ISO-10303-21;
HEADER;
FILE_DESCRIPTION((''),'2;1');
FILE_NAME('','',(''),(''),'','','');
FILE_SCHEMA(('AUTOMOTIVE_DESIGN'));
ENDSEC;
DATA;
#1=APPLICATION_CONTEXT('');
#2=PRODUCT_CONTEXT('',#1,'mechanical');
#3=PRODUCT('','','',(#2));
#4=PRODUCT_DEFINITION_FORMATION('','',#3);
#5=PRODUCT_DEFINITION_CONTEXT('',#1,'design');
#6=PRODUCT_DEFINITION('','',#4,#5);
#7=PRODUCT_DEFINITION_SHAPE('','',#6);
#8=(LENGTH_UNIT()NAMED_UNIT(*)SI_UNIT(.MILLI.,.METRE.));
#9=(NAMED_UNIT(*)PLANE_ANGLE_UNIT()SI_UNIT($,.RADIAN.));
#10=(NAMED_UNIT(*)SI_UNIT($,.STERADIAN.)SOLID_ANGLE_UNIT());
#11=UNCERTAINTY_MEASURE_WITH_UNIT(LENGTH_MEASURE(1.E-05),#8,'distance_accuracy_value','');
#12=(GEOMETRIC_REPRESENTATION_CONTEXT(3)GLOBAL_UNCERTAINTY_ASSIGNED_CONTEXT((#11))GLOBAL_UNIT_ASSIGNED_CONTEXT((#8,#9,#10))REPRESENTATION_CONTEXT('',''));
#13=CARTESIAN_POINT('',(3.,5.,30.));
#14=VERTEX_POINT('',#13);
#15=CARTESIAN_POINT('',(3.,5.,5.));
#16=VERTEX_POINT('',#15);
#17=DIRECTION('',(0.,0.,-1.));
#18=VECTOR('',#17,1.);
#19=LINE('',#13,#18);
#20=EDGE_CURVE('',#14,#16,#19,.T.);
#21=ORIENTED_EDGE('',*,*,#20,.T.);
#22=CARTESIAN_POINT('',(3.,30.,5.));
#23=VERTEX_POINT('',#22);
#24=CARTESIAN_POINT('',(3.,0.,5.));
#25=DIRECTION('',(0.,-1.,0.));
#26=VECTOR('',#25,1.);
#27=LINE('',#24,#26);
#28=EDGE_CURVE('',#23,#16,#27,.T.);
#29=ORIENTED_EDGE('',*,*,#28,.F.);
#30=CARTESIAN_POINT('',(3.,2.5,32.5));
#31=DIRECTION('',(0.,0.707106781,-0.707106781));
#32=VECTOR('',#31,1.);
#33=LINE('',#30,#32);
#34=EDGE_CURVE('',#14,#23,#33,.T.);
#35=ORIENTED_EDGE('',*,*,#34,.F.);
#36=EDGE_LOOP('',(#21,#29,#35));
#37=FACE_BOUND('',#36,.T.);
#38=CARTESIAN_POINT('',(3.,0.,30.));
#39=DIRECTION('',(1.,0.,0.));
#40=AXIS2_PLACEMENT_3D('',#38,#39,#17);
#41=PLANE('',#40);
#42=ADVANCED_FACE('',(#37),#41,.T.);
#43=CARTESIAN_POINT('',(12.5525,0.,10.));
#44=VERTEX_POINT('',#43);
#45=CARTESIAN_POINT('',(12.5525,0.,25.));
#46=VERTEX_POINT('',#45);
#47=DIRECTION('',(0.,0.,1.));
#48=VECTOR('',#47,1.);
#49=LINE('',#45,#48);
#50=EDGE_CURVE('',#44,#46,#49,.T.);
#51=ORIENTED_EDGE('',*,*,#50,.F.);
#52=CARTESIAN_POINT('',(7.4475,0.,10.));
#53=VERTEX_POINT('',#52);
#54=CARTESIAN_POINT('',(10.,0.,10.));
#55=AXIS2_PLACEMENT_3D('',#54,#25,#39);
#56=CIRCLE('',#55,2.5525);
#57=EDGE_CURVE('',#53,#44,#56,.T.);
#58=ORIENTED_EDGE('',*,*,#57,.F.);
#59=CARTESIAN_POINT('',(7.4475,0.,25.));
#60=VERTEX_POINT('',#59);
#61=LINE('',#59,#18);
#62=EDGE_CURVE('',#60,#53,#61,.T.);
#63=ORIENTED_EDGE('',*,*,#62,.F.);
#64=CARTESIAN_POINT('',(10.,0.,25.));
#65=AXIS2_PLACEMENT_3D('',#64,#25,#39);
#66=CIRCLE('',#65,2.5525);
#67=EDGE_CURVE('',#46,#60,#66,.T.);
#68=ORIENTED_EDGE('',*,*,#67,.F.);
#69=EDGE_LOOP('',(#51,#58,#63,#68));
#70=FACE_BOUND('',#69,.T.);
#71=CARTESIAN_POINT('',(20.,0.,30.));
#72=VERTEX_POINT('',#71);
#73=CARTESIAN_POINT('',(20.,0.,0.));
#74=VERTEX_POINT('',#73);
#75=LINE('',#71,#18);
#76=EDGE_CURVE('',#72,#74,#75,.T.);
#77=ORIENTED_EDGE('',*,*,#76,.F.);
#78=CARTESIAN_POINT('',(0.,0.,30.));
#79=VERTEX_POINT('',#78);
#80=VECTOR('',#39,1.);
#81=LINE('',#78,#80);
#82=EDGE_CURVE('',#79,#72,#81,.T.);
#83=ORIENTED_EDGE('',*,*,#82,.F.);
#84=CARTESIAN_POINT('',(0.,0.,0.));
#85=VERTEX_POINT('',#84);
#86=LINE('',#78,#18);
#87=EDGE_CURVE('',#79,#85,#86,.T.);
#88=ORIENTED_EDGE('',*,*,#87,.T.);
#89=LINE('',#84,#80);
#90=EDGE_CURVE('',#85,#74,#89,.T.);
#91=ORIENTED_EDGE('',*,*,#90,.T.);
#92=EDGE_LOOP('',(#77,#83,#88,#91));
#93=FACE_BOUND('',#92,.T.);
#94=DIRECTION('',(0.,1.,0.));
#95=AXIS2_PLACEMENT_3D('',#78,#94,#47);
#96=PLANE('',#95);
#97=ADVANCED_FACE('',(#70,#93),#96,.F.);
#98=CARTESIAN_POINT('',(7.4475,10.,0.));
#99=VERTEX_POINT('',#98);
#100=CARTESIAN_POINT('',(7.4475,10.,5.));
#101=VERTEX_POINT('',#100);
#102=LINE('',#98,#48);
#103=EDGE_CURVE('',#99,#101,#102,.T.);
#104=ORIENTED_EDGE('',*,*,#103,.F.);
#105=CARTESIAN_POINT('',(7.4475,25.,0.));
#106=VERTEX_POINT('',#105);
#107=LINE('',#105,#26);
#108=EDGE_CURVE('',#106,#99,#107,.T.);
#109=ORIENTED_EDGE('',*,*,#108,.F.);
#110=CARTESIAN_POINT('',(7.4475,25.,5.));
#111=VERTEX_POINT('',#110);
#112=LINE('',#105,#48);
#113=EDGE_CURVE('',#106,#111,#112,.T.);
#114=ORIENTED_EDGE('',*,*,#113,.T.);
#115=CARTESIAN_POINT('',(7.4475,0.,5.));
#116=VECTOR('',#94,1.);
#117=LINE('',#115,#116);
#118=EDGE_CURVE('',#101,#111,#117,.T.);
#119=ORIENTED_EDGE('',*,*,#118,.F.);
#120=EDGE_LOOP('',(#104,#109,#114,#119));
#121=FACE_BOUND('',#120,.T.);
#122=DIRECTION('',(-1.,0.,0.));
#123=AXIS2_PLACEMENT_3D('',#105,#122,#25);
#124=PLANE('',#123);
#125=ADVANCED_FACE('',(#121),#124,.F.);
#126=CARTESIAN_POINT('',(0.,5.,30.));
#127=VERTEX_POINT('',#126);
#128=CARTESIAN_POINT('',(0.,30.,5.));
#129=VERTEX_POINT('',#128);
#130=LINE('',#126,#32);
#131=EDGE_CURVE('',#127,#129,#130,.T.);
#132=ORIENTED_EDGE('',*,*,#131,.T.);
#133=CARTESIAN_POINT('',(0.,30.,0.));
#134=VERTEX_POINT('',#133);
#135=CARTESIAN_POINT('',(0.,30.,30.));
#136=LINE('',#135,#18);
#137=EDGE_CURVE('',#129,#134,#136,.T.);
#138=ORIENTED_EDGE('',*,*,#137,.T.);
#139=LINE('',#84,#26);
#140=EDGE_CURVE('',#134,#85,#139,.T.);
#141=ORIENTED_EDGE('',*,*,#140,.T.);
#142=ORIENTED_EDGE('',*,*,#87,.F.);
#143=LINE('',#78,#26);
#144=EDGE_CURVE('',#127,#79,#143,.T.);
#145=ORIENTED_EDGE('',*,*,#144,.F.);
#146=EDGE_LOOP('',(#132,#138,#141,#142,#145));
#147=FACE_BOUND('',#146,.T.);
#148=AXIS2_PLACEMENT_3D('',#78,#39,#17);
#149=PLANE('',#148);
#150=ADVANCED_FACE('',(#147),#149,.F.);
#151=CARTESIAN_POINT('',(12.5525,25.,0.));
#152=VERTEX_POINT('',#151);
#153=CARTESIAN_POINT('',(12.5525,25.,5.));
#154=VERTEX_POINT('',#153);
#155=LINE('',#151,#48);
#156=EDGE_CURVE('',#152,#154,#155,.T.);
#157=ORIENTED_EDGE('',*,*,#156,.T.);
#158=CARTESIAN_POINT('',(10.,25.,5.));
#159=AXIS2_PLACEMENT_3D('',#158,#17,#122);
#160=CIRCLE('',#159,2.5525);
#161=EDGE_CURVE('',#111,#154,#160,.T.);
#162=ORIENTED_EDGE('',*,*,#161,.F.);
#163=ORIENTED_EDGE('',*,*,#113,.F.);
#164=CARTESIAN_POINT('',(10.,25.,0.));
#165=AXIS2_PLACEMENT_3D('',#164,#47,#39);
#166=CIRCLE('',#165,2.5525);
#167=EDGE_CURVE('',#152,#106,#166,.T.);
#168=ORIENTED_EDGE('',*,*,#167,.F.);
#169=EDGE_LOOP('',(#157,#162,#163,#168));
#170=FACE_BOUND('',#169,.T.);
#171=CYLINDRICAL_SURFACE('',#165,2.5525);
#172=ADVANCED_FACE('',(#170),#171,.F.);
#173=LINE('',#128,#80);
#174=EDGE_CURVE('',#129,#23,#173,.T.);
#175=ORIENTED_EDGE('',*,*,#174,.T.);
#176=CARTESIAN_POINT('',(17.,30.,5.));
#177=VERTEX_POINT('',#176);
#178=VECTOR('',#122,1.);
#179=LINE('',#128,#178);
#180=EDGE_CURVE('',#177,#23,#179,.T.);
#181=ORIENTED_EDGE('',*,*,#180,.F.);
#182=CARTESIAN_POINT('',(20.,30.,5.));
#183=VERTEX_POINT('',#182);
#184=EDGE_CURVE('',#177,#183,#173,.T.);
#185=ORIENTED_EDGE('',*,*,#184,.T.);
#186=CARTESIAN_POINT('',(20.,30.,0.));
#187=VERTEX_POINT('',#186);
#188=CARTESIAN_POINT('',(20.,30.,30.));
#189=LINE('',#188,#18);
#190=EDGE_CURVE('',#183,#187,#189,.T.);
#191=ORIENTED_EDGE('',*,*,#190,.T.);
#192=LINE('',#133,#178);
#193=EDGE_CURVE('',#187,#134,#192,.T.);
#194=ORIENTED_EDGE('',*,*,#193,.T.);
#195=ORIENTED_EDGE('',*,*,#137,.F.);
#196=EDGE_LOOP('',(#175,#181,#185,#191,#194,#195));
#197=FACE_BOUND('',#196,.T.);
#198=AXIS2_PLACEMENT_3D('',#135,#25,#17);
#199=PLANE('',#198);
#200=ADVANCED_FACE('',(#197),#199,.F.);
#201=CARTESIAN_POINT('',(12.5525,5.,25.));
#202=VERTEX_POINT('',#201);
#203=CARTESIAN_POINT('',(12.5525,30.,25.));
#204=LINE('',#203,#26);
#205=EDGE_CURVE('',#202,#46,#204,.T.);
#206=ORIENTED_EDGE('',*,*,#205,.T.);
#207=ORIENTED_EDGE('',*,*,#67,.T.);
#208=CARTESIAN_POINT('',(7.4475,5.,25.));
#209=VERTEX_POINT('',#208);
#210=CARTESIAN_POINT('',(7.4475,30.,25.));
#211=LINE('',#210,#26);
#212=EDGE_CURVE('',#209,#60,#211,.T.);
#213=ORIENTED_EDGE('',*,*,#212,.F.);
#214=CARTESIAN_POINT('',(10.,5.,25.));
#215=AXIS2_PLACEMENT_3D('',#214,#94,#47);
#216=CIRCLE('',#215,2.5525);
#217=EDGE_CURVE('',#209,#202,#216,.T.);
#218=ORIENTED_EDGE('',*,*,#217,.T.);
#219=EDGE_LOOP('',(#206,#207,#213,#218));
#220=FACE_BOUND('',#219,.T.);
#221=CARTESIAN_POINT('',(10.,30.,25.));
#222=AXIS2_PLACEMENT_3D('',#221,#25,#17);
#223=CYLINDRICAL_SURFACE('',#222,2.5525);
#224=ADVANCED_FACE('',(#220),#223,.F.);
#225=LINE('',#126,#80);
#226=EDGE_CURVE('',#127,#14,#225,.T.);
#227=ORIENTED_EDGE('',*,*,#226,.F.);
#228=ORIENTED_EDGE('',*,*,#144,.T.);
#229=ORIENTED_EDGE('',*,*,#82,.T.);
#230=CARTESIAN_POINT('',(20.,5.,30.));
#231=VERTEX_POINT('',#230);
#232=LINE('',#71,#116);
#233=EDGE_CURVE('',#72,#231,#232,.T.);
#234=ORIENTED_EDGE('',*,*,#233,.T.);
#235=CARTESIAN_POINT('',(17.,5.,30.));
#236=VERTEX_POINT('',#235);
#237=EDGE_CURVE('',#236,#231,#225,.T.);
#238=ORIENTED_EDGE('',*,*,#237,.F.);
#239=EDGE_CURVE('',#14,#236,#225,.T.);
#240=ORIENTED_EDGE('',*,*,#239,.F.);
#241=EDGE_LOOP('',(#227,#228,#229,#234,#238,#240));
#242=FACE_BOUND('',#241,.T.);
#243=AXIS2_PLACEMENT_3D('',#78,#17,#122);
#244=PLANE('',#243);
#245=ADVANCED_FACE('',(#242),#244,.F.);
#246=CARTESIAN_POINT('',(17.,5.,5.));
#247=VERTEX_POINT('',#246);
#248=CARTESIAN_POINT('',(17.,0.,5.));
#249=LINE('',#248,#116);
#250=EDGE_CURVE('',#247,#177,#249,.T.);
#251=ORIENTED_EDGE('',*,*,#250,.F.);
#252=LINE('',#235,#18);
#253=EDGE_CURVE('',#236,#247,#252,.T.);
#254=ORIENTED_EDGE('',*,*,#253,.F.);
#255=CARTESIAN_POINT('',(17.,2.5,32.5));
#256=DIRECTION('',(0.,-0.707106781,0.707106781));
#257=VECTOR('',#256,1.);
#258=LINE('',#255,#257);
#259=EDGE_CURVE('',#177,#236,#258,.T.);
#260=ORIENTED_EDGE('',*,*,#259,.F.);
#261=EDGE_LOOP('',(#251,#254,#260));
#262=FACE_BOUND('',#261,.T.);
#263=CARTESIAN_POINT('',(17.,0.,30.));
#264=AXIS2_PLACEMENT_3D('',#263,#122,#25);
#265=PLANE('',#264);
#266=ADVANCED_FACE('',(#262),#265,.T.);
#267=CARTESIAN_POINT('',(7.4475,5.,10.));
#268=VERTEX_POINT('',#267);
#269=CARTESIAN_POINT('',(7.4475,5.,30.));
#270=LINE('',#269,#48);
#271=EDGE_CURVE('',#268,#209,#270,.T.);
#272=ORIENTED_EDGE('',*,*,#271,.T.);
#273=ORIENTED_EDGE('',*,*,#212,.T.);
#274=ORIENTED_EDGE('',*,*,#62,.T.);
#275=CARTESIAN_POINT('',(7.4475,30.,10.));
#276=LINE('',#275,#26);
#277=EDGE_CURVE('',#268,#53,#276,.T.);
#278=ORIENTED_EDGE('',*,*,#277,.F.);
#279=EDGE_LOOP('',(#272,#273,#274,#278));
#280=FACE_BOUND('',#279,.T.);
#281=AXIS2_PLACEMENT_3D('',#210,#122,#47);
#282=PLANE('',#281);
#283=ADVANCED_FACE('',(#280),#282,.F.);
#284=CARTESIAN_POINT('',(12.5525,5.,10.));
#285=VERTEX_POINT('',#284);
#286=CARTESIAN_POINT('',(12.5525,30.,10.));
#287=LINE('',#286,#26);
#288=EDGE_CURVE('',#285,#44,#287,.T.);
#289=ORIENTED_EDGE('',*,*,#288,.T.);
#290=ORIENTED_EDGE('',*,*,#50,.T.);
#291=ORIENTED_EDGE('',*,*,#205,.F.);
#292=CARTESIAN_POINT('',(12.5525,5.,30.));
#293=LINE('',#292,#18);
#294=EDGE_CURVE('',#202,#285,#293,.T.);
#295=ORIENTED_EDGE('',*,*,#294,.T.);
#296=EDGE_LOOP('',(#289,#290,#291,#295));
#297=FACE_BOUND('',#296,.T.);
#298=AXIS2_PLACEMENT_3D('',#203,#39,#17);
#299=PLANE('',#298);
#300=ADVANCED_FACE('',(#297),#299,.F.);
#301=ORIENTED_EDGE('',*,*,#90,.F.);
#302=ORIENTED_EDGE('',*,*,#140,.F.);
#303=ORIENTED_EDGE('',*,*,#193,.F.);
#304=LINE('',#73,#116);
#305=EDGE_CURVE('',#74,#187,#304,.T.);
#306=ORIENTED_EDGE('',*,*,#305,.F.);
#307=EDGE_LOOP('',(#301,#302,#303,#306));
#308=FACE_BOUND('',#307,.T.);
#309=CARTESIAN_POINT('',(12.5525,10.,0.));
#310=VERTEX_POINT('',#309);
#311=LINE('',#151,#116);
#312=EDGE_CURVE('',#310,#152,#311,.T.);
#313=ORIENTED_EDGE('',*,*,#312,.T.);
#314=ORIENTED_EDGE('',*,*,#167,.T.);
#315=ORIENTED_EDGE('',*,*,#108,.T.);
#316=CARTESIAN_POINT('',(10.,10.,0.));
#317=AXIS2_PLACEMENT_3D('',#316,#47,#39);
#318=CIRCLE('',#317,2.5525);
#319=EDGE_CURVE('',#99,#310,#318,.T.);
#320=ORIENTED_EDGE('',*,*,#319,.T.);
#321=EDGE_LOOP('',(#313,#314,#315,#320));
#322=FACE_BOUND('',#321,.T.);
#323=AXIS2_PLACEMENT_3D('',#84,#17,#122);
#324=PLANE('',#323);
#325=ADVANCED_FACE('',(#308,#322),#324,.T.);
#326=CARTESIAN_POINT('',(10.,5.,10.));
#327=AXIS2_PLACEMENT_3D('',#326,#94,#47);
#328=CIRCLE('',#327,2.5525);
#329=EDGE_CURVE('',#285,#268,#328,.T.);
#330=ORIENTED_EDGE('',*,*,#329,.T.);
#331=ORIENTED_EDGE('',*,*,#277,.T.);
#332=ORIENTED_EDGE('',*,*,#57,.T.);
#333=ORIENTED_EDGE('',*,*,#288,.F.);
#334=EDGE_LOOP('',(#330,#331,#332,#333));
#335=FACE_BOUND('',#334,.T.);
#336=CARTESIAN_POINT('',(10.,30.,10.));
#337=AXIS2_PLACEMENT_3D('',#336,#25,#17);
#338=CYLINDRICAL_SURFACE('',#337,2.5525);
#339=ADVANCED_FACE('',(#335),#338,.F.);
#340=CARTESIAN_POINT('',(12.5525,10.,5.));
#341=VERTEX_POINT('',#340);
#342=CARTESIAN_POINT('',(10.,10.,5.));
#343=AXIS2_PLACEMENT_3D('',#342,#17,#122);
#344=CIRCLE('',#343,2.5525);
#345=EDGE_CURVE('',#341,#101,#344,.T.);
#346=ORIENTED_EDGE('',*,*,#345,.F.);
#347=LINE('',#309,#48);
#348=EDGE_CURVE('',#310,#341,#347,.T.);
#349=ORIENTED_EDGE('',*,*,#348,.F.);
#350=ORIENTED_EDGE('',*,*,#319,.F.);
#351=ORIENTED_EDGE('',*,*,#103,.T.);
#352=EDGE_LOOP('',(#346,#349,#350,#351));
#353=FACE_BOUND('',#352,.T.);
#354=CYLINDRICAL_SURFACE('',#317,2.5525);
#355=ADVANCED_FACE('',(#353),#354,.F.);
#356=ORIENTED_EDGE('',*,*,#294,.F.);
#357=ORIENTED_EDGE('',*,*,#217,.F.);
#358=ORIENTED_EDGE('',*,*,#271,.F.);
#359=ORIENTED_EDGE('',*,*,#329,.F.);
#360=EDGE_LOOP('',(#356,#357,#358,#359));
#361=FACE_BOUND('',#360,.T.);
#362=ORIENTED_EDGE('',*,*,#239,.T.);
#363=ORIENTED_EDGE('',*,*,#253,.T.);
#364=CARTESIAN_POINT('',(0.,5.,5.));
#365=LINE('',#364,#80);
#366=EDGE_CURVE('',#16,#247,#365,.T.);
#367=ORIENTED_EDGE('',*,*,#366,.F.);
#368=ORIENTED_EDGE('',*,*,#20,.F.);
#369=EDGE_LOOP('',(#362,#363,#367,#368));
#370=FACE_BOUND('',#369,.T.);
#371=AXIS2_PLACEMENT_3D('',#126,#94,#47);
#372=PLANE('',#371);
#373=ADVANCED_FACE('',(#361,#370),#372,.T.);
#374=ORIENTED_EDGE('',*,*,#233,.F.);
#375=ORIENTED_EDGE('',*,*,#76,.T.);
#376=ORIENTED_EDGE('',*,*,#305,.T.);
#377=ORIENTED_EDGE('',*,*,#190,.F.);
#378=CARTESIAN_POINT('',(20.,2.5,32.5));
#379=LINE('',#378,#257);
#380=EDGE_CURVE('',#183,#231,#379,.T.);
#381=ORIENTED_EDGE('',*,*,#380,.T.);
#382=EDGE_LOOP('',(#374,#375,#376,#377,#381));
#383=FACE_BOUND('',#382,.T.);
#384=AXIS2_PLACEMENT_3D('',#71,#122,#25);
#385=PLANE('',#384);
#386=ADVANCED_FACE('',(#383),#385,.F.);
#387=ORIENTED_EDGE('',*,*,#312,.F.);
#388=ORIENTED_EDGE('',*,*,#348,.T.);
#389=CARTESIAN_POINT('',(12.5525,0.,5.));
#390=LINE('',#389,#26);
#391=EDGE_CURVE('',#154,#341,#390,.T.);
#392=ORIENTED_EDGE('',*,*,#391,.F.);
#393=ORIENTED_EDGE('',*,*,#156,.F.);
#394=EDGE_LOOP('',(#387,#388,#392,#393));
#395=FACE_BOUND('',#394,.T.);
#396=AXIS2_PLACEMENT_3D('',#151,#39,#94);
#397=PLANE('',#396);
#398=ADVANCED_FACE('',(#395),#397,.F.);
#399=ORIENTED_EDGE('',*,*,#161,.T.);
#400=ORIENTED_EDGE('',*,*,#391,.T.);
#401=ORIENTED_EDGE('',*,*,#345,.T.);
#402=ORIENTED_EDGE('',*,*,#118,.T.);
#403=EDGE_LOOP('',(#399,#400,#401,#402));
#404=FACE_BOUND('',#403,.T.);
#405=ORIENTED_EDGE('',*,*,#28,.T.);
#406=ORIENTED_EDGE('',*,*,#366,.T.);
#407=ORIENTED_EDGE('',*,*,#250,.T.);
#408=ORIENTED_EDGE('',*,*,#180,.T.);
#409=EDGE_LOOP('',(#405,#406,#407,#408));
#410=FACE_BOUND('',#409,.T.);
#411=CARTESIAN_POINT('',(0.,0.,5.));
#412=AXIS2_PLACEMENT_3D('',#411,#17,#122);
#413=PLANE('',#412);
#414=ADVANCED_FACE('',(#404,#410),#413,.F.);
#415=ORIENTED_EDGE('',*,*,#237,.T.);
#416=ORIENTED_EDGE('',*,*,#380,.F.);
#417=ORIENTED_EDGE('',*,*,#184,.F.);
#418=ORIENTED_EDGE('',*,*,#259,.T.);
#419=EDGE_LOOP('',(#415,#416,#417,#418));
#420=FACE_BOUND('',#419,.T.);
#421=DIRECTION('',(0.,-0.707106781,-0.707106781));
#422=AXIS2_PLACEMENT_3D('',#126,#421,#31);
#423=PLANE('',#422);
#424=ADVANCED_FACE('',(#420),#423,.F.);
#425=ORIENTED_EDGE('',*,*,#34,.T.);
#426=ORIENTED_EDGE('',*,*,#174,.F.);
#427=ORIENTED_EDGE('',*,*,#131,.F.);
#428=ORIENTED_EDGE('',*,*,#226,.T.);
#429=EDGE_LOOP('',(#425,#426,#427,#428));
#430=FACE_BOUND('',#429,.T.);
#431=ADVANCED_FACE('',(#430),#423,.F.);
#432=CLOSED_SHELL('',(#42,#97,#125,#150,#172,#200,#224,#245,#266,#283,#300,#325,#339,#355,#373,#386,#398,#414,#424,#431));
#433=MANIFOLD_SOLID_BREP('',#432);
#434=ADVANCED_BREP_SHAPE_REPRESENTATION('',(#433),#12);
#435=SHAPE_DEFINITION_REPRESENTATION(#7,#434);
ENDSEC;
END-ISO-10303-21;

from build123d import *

# Parameters (mm, degrees)
ESQUISSE1_W                  = 20
ESQUISSE1_H                  = 30
BOSS_EXTRU_1_DEPTH           = 30
COQUE1_START                 = 3
COQUE1_OUTLINE_W             = 25
COQUE1_OUTLINE_H             = 25
COQUE1_DEPTH                 = 14
ENL_V_MAT_EXTRU_1_DEPTH      = 47.904157598
ENL_V_MAT_EXTRU_1_DEPTH_BACK = 47.904157598
ENL_V_MAT_EXTRU_2_DEPTH      = 44.874821937
R_P_TITION_CIRCULAIRE1_COUNT = 2
R_P_TITION_CIRCULAIRE1_ANGLE = 270


# Read off the part's stored shape, not the designer's step: Coque1
with BuildPart() as part:
    # Esquisse1 → Boss.-Extru.1 (new body)
    with BuildSketch(Plane.XY):
        with Locations((10, 15)):
            Rectangle(ESQUISSE1_W, ESQUISSE1_H)
    extrude(amount=BOSS_EXTRU_1_DEPTH)

    # Coque1 outline → Coque1 (cut)
    with BuildSketch(Plane.YZ.offset(COQUE1_START)):
        with Locations((17.5, 17.5)):
            Rectangle(COQUE1_OUTLINE_W, COQUE1_OUTLINE_H)
    extrude(amount=COQUE1_DEPTH, mode=Mode.SUBTRACT)

    # Esquisse3 → Enlèv. mat.-Extru.1 (cut, two sides: drawn at the far end of the back side and taken through both)
    with BuildSketch(Plane(origin=(20, 0, 0), x_dir=(0, 0, -1), z_dir=(1, 0, 0)).offset(-ENL_V_MAT_EXTRU_1_DEPTH_BACK)):
        Polygon((-5, 30), (-30, 30), (-30, 5), align=None)
    extrude(amount=ENL_V_MAT_EXTRU_1_DEPTH + ENL_V_MAT_EXTRU_1_DEPTH_BACK, mode=Mode.SUBTRACT)

    # Esquisse5 → Enlèv. mat.-Extru.2 (cut, symmetric)
    with BuildSketch(Plane.XY.offset(5)):
        with BuildLine():
            Line((12.5525, 25), (12.5525, 10))
            ThreePointArc((12.5525, 10), (10, 7.4475), (7.4475, 10))
            Line((7.4475, 10), (7.4475, 25))
            ThreePointArc((7.4475, 25), (10, 27.5525), (12.5525, 25))
        make_face()
    enl_v_mat_extru_2 = extrude(amount=ENL_V_MAT_EXTRU_2_DEPTH, both=True, mode=Mode.SUBTRACT)

    # Répétition circulaire1: Enlèv. mat.-Extru.2 ×2 about axis
    r_p_tition_circulaire1_axis = Axis((0, 5, 5), (-1, 0, 0))
    for i in range(1, R_P_TITION_CIRCULAIRE1_COUNT):
        add(enl_v_mat_extru_2.rotate(r_p_tition_circulaire1_axis, i * R_P_TITION_CIRCULAIRE1_ANGLE / (R_P_TITION_CIRCULAIRE1_COUNT - 1)), mode=Mode.SUBTRACT)


solid = part.part
